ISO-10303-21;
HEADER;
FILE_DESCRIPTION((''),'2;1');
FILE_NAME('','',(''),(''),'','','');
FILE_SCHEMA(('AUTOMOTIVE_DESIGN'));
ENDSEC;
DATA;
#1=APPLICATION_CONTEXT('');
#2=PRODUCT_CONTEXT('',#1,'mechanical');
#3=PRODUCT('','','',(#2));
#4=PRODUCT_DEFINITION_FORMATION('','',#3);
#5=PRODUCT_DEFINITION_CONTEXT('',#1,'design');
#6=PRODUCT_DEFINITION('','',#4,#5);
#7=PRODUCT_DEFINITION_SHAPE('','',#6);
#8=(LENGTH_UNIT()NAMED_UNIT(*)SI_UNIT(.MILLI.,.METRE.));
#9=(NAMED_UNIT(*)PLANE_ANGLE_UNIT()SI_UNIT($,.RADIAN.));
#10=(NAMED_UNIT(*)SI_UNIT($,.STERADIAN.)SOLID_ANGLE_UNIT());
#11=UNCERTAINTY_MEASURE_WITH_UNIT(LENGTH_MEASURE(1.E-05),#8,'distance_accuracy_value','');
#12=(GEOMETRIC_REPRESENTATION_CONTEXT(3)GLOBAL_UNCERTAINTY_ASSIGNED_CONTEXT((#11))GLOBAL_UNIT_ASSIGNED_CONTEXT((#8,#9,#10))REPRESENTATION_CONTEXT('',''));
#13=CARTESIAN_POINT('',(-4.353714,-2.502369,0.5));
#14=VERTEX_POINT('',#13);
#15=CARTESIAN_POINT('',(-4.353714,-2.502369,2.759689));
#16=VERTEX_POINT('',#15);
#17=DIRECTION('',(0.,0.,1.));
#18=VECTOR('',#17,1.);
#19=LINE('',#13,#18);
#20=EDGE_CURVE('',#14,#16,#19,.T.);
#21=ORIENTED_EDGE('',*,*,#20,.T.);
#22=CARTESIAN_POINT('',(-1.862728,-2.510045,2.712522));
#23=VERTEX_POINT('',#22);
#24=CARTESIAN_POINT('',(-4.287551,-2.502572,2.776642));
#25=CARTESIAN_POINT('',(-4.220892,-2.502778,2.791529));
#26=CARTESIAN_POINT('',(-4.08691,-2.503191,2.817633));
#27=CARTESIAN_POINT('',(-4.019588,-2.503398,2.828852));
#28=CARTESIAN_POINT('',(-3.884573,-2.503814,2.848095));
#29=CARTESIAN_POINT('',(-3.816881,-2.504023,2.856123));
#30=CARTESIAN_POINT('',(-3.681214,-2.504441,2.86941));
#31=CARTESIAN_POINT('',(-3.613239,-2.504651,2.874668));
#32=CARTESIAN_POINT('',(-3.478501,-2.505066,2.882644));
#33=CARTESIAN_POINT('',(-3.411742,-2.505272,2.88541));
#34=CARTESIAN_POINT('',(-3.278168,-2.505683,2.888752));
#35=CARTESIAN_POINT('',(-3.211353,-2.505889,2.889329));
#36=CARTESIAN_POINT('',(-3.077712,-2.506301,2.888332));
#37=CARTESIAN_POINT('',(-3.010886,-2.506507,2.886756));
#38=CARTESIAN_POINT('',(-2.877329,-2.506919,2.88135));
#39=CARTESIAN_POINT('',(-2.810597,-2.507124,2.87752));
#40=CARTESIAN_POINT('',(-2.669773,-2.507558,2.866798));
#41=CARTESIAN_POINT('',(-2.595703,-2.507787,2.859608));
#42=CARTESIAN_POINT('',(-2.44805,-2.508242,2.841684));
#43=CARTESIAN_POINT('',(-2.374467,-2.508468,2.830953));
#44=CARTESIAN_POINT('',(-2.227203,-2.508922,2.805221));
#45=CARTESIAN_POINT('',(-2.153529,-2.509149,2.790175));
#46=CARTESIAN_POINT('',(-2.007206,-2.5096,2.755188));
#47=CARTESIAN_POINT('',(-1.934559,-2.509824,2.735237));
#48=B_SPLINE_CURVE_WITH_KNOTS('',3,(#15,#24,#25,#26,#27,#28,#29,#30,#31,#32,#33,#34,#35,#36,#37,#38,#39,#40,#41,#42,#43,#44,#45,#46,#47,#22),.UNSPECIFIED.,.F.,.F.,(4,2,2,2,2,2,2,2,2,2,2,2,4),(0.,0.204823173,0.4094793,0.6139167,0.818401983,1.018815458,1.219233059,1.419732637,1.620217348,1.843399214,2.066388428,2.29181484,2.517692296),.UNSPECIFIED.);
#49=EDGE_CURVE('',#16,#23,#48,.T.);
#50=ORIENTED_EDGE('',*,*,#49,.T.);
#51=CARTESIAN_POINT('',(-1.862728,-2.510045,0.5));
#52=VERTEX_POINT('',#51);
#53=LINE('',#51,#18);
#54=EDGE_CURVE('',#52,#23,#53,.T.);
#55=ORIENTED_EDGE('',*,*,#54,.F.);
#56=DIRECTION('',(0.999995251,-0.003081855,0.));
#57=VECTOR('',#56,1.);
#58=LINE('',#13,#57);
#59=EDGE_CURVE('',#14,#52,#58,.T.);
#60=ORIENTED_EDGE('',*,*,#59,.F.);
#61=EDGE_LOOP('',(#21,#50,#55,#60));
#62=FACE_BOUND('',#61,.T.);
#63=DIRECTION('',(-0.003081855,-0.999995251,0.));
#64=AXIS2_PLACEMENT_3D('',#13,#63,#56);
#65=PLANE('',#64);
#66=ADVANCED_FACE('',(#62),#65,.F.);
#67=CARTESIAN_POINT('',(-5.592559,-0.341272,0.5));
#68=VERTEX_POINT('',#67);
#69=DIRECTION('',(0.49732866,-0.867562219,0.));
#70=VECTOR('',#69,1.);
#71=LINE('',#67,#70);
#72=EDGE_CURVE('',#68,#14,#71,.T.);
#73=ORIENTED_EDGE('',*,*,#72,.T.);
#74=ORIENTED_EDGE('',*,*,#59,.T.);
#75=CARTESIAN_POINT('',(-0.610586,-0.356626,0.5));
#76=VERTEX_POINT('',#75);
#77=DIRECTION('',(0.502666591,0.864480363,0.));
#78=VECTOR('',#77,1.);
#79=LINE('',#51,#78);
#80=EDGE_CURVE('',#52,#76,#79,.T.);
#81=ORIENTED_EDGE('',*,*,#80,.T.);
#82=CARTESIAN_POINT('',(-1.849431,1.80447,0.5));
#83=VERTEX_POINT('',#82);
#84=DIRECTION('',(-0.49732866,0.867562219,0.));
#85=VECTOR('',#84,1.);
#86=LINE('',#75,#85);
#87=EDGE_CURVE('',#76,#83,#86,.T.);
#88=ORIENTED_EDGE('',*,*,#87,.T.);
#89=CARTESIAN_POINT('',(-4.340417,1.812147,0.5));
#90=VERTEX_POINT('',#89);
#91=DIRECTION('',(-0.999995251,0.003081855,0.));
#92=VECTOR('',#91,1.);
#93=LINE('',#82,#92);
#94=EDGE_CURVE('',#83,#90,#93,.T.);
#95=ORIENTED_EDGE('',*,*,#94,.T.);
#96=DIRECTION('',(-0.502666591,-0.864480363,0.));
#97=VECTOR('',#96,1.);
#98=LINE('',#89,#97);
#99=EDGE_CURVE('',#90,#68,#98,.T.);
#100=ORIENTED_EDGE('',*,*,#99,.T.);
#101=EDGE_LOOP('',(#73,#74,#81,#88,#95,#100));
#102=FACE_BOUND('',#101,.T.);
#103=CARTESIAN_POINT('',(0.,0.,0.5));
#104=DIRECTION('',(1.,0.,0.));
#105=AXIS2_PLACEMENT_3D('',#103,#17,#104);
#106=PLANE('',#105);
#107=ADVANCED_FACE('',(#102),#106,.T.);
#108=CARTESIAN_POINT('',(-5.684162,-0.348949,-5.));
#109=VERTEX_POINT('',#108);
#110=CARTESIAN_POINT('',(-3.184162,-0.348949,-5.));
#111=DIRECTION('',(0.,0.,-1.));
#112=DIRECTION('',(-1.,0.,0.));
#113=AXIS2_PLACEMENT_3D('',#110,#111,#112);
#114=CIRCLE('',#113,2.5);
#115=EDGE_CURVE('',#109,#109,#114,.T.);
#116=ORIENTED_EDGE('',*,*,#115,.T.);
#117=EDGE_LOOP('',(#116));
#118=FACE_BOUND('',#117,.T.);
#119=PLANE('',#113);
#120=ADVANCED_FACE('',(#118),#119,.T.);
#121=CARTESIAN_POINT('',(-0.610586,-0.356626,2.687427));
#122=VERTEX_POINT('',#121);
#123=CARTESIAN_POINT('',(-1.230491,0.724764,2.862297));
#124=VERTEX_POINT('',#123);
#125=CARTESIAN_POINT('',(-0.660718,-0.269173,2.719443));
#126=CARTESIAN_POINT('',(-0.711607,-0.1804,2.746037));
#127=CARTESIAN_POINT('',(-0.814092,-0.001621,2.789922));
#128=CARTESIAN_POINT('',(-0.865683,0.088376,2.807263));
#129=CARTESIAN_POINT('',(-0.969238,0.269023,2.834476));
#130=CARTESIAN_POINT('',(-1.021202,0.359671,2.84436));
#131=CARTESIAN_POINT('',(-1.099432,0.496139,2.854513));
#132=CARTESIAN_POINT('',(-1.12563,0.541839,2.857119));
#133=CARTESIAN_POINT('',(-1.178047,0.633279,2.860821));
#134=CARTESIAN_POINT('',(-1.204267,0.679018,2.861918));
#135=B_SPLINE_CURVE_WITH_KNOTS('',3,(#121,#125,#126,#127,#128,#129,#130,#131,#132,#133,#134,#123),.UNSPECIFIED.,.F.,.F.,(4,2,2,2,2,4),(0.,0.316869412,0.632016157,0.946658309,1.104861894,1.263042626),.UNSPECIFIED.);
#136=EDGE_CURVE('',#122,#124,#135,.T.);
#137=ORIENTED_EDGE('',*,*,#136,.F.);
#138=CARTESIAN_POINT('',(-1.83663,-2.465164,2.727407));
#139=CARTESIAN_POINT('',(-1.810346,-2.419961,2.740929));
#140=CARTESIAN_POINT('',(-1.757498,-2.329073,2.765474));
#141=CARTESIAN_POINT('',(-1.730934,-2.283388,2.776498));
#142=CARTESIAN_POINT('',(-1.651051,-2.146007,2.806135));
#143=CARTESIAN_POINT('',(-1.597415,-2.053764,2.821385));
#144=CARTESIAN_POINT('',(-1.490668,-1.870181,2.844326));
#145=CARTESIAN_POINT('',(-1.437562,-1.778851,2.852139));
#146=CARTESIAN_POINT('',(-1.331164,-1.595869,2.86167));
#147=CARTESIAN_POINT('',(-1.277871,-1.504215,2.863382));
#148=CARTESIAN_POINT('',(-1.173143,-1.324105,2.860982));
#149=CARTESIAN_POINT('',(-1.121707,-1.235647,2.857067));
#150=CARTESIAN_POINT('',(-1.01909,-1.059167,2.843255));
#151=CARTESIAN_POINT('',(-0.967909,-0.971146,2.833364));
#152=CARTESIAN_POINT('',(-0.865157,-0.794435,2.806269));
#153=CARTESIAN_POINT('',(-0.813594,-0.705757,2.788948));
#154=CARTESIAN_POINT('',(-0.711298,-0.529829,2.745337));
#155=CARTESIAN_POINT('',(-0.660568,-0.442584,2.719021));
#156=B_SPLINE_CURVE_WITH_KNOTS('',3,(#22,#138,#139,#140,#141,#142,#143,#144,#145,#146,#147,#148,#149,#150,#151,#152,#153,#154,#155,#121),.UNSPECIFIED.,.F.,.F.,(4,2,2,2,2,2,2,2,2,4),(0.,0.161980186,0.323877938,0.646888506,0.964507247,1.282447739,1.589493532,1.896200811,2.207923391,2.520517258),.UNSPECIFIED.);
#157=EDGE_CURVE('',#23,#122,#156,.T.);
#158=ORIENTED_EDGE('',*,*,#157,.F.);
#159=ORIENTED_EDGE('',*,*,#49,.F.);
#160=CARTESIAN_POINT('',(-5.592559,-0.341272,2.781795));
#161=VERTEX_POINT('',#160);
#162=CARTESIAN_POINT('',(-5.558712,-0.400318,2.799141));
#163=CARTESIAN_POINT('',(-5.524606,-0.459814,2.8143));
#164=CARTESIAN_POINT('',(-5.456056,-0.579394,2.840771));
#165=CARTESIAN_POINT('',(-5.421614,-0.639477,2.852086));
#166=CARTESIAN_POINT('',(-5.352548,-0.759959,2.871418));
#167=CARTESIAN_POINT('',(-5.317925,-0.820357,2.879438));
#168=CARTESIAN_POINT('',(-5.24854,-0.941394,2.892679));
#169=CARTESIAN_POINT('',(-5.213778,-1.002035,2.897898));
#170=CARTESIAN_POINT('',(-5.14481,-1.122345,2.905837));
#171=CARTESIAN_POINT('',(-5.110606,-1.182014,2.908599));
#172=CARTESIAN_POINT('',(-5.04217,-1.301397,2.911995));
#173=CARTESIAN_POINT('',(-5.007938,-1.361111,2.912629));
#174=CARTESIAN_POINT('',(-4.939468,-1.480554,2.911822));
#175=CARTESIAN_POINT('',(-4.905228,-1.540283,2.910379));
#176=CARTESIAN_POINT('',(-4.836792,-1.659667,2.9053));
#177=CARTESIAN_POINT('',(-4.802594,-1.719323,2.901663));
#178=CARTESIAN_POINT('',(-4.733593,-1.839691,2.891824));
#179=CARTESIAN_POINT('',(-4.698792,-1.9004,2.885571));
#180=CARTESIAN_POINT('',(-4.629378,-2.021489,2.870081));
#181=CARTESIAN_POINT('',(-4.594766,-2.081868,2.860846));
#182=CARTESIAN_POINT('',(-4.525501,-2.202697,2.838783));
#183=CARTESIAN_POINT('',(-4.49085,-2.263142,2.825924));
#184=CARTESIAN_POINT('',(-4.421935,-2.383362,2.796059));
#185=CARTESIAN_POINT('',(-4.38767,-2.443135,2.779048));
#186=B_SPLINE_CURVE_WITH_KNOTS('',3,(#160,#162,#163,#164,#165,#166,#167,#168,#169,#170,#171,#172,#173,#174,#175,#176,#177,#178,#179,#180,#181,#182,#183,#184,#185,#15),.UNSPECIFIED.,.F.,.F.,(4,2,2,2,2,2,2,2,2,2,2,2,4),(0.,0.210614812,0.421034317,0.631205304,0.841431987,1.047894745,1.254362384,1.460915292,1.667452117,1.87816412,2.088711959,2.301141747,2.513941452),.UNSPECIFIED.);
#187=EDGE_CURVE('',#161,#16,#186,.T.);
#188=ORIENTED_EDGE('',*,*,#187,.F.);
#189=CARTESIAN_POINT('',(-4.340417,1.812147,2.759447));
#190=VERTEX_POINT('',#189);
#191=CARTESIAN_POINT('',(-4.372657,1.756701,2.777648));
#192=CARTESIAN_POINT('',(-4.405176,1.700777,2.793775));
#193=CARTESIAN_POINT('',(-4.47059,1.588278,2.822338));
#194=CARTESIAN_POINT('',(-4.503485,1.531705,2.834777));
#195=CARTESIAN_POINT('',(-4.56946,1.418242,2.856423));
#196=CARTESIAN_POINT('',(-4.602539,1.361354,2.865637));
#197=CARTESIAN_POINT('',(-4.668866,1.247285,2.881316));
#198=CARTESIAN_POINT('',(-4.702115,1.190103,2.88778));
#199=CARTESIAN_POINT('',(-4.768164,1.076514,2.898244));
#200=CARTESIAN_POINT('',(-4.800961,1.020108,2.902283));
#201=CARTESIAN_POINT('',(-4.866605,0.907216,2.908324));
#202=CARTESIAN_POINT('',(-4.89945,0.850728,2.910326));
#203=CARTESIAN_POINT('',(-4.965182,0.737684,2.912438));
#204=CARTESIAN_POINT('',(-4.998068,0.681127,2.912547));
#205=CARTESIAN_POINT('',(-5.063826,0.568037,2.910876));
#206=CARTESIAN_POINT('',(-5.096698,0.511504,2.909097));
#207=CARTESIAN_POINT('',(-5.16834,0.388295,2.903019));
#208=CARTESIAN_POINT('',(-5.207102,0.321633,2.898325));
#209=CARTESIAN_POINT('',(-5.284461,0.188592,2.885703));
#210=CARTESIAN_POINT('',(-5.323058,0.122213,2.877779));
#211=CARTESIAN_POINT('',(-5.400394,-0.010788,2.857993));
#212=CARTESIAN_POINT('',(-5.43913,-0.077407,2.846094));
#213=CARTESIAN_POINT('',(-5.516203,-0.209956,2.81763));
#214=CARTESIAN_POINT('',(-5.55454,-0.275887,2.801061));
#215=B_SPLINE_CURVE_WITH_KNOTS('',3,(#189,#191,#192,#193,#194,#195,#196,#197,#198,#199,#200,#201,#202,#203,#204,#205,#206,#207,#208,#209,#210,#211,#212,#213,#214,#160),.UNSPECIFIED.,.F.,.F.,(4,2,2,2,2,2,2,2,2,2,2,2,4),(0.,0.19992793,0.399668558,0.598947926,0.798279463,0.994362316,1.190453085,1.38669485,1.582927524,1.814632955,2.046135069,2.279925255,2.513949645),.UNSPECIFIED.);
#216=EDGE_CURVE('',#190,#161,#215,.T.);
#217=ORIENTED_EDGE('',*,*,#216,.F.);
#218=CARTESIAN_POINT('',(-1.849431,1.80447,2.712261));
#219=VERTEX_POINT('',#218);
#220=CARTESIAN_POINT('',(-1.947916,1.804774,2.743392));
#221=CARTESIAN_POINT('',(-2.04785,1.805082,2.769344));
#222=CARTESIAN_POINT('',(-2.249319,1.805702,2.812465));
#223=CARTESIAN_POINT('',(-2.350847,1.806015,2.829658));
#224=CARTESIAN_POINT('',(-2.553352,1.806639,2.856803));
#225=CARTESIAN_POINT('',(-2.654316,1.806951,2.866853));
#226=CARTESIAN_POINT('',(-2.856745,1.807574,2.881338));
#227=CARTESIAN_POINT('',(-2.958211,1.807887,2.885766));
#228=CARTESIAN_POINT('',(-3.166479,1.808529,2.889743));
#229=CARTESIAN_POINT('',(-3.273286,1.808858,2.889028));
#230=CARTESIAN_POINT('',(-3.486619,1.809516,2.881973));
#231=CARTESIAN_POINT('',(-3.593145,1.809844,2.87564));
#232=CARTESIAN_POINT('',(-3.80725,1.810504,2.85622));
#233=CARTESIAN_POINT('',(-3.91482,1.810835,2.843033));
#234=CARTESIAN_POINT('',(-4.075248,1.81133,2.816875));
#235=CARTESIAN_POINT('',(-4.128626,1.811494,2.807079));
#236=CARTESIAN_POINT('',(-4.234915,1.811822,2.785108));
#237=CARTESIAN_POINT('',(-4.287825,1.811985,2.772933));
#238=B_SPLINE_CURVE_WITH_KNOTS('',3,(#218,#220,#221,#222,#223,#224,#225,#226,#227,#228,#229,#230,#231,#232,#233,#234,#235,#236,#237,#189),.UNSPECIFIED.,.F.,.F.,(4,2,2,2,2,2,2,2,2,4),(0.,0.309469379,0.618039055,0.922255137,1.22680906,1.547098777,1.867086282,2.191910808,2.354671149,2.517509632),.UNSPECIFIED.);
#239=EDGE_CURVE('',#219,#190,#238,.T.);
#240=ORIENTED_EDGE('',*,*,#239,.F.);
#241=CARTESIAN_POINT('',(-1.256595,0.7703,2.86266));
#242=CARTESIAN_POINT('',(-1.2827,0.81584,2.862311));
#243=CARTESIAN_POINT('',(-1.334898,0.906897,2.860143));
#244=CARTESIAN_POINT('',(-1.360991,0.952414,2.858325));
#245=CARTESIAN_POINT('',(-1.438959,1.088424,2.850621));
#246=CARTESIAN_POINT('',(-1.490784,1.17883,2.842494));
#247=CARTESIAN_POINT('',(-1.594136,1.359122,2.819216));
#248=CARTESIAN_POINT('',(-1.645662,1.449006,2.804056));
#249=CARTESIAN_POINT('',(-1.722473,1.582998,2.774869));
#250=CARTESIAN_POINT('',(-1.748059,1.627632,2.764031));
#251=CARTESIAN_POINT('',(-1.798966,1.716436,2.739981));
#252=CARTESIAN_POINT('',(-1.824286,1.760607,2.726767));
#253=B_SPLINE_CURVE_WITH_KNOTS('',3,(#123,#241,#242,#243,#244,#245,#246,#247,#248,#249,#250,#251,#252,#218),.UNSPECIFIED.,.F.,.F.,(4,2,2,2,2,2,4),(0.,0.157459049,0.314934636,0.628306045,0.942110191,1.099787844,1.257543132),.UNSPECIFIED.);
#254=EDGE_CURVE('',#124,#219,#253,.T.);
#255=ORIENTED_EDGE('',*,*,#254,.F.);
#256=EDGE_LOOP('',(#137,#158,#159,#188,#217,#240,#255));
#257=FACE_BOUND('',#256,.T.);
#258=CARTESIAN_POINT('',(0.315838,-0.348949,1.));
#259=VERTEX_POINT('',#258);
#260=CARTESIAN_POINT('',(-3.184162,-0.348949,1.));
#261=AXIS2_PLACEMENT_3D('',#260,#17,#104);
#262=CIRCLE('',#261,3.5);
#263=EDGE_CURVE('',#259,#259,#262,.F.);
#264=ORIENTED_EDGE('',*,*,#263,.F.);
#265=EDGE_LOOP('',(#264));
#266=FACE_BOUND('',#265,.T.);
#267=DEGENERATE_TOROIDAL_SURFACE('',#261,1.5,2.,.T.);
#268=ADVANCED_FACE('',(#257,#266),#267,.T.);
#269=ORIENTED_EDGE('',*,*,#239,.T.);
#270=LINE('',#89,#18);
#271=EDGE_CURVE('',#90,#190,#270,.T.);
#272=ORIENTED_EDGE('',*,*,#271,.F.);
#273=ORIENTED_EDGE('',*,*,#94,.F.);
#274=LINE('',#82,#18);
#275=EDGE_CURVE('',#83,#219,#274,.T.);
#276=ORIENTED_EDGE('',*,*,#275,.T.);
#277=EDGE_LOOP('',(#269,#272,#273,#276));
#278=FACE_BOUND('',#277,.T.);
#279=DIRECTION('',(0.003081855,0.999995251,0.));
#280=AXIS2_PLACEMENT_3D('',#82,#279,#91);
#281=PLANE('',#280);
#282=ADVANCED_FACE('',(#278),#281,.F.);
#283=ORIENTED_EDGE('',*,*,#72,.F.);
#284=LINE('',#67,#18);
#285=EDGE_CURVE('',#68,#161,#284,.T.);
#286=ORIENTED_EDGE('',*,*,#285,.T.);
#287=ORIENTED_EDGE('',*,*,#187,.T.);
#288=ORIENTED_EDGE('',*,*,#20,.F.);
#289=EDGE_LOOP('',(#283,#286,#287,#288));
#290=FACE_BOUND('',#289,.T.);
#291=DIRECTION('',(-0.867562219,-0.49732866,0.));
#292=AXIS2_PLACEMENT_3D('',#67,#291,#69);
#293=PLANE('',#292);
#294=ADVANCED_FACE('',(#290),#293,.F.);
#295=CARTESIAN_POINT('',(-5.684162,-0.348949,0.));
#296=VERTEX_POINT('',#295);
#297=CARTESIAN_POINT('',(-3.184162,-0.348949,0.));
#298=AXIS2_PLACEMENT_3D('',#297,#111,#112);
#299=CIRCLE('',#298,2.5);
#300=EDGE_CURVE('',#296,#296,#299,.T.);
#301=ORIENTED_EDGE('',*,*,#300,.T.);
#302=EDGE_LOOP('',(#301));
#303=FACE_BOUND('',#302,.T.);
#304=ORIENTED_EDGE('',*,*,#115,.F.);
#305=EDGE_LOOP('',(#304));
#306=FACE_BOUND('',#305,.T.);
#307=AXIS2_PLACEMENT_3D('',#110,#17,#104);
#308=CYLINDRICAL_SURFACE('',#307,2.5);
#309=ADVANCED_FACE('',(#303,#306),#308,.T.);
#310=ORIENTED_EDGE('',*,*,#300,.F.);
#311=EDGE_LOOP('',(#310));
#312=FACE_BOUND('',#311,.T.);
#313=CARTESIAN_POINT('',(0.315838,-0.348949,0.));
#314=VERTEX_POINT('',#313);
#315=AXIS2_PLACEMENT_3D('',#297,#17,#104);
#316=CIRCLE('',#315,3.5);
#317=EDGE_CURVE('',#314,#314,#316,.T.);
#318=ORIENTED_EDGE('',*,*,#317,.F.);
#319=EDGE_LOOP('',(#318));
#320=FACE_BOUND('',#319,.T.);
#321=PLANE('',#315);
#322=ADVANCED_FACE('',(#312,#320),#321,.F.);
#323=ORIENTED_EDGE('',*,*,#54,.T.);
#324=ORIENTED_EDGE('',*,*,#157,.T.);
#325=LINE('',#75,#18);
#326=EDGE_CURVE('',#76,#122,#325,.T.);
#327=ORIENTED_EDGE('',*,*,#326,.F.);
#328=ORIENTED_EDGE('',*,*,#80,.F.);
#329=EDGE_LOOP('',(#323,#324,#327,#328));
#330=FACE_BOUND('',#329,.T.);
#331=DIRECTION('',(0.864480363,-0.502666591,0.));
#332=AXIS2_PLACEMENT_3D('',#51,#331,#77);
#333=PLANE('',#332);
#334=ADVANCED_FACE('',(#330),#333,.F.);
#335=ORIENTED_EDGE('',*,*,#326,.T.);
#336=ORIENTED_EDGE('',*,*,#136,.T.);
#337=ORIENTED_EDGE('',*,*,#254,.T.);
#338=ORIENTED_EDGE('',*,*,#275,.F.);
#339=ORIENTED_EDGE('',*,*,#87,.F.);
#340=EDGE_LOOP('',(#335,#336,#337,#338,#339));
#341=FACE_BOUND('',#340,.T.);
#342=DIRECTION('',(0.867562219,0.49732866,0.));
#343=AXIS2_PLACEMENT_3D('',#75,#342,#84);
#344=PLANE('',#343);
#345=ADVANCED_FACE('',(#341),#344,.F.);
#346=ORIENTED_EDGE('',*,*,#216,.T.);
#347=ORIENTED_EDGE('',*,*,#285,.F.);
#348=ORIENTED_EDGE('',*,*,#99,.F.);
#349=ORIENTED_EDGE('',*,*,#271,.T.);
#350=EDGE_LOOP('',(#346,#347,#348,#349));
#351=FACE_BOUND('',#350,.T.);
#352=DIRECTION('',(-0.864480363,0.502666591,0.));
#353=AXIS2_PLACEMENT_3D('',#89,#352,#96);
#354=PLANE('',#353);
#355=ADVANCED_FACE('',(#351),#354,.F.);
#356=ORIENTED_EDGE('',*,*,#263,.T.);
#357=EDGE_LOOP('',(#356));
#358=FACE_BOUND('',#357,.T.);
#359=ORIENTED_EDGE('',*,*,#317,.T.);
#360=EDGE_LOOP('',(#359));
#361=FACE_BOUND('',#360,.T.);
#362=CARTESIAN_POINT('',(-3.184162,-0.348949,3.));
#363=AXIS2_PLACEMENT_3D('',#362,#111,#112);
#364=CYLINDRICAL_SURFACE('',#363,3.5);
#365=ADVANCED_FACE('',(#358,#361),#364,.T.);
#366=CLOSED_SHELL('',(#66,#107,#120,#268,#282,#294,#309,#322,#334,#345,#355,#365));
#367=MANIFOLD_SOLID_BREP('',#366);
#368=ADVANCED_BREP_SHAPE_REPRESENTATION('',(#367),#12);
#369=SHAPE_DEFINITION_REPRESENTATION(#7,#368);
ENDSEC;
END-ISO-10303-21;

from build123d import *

# Parameters (mm, degrees)
SKETCH1_R           = 3.5
BOSS_EXTRUDE1_DEPTH = 3
SKETCH2_R           = 2.5
BOSS_EXTRUDE2_DEPTH = 5
CUT_EXTRUDE2_DEPTH  = 2.5
FILLET3_R           = 2


with BuildPart() as part:
    # Sketch1 → Boss-Extrude1 (new body)
    with BuildSketch(Plane.XY):
        with Locations((-3.184162196, -0.348949282)):
            Circle(SKETCH1_R)
    extrude(amount=BOSS_EXTRUDE1_DEPTH)

    # Sketch2 → Boss-Extrude2 (add)
    with BuildSketch(Plane(origin=(0, 0, 0), x_dir=(-1, 0, 0), z_dir=(0, 0, -1))):
        with Locations((3.184162196, -0.348949282)):
            Circle(SKETCH2_R)
    extrude(amount=BOSS_EXTRUDE2_DEPTH)

    # Sketch3 → Cut-Extrude2 (cut)
    with BuildSketch(Plane.XY.offset(3)):
        Polygon((-4.340417486, 1.812146916), (-5.592559216, -0.341272384), (-4.353714262, -2.502368582), (-1.862727578, -2.510045479), (-0.610585848, -0.356626179), (-1.849430802, 1.804470018), align=None)
    extrude(amount=-CUT_EXTRUDE2_DEPTH, mode=Mode.SUBTRACT)

    # Fillet3
    # the kernel refuses this fillet: 2 mm, written as the material it takes off along each edge
    with BuildSketch(Plane(origin=(-3.184162196, -0.348949282, 3), x_dir=(1, 0, 0), z_dir=(0, -1, 0))) as fillet3_piece_1:
        with BuildLine():
            CenterArc((3.5 - FILLET3_R, -FILLET3_R), FILLET3_R, 0, 90)
            Line((3.5 - FILLET3_R, 0), (3.5, 0))
            Line((3.5, 0), (3.5, -FILLET3_R))
        make_face()
    revolve(axis=Axis((-3.184162196, -0.348949282, 3), (0, 0, 1)), mode=Mode.SUBTRACT)


solid = part.part
